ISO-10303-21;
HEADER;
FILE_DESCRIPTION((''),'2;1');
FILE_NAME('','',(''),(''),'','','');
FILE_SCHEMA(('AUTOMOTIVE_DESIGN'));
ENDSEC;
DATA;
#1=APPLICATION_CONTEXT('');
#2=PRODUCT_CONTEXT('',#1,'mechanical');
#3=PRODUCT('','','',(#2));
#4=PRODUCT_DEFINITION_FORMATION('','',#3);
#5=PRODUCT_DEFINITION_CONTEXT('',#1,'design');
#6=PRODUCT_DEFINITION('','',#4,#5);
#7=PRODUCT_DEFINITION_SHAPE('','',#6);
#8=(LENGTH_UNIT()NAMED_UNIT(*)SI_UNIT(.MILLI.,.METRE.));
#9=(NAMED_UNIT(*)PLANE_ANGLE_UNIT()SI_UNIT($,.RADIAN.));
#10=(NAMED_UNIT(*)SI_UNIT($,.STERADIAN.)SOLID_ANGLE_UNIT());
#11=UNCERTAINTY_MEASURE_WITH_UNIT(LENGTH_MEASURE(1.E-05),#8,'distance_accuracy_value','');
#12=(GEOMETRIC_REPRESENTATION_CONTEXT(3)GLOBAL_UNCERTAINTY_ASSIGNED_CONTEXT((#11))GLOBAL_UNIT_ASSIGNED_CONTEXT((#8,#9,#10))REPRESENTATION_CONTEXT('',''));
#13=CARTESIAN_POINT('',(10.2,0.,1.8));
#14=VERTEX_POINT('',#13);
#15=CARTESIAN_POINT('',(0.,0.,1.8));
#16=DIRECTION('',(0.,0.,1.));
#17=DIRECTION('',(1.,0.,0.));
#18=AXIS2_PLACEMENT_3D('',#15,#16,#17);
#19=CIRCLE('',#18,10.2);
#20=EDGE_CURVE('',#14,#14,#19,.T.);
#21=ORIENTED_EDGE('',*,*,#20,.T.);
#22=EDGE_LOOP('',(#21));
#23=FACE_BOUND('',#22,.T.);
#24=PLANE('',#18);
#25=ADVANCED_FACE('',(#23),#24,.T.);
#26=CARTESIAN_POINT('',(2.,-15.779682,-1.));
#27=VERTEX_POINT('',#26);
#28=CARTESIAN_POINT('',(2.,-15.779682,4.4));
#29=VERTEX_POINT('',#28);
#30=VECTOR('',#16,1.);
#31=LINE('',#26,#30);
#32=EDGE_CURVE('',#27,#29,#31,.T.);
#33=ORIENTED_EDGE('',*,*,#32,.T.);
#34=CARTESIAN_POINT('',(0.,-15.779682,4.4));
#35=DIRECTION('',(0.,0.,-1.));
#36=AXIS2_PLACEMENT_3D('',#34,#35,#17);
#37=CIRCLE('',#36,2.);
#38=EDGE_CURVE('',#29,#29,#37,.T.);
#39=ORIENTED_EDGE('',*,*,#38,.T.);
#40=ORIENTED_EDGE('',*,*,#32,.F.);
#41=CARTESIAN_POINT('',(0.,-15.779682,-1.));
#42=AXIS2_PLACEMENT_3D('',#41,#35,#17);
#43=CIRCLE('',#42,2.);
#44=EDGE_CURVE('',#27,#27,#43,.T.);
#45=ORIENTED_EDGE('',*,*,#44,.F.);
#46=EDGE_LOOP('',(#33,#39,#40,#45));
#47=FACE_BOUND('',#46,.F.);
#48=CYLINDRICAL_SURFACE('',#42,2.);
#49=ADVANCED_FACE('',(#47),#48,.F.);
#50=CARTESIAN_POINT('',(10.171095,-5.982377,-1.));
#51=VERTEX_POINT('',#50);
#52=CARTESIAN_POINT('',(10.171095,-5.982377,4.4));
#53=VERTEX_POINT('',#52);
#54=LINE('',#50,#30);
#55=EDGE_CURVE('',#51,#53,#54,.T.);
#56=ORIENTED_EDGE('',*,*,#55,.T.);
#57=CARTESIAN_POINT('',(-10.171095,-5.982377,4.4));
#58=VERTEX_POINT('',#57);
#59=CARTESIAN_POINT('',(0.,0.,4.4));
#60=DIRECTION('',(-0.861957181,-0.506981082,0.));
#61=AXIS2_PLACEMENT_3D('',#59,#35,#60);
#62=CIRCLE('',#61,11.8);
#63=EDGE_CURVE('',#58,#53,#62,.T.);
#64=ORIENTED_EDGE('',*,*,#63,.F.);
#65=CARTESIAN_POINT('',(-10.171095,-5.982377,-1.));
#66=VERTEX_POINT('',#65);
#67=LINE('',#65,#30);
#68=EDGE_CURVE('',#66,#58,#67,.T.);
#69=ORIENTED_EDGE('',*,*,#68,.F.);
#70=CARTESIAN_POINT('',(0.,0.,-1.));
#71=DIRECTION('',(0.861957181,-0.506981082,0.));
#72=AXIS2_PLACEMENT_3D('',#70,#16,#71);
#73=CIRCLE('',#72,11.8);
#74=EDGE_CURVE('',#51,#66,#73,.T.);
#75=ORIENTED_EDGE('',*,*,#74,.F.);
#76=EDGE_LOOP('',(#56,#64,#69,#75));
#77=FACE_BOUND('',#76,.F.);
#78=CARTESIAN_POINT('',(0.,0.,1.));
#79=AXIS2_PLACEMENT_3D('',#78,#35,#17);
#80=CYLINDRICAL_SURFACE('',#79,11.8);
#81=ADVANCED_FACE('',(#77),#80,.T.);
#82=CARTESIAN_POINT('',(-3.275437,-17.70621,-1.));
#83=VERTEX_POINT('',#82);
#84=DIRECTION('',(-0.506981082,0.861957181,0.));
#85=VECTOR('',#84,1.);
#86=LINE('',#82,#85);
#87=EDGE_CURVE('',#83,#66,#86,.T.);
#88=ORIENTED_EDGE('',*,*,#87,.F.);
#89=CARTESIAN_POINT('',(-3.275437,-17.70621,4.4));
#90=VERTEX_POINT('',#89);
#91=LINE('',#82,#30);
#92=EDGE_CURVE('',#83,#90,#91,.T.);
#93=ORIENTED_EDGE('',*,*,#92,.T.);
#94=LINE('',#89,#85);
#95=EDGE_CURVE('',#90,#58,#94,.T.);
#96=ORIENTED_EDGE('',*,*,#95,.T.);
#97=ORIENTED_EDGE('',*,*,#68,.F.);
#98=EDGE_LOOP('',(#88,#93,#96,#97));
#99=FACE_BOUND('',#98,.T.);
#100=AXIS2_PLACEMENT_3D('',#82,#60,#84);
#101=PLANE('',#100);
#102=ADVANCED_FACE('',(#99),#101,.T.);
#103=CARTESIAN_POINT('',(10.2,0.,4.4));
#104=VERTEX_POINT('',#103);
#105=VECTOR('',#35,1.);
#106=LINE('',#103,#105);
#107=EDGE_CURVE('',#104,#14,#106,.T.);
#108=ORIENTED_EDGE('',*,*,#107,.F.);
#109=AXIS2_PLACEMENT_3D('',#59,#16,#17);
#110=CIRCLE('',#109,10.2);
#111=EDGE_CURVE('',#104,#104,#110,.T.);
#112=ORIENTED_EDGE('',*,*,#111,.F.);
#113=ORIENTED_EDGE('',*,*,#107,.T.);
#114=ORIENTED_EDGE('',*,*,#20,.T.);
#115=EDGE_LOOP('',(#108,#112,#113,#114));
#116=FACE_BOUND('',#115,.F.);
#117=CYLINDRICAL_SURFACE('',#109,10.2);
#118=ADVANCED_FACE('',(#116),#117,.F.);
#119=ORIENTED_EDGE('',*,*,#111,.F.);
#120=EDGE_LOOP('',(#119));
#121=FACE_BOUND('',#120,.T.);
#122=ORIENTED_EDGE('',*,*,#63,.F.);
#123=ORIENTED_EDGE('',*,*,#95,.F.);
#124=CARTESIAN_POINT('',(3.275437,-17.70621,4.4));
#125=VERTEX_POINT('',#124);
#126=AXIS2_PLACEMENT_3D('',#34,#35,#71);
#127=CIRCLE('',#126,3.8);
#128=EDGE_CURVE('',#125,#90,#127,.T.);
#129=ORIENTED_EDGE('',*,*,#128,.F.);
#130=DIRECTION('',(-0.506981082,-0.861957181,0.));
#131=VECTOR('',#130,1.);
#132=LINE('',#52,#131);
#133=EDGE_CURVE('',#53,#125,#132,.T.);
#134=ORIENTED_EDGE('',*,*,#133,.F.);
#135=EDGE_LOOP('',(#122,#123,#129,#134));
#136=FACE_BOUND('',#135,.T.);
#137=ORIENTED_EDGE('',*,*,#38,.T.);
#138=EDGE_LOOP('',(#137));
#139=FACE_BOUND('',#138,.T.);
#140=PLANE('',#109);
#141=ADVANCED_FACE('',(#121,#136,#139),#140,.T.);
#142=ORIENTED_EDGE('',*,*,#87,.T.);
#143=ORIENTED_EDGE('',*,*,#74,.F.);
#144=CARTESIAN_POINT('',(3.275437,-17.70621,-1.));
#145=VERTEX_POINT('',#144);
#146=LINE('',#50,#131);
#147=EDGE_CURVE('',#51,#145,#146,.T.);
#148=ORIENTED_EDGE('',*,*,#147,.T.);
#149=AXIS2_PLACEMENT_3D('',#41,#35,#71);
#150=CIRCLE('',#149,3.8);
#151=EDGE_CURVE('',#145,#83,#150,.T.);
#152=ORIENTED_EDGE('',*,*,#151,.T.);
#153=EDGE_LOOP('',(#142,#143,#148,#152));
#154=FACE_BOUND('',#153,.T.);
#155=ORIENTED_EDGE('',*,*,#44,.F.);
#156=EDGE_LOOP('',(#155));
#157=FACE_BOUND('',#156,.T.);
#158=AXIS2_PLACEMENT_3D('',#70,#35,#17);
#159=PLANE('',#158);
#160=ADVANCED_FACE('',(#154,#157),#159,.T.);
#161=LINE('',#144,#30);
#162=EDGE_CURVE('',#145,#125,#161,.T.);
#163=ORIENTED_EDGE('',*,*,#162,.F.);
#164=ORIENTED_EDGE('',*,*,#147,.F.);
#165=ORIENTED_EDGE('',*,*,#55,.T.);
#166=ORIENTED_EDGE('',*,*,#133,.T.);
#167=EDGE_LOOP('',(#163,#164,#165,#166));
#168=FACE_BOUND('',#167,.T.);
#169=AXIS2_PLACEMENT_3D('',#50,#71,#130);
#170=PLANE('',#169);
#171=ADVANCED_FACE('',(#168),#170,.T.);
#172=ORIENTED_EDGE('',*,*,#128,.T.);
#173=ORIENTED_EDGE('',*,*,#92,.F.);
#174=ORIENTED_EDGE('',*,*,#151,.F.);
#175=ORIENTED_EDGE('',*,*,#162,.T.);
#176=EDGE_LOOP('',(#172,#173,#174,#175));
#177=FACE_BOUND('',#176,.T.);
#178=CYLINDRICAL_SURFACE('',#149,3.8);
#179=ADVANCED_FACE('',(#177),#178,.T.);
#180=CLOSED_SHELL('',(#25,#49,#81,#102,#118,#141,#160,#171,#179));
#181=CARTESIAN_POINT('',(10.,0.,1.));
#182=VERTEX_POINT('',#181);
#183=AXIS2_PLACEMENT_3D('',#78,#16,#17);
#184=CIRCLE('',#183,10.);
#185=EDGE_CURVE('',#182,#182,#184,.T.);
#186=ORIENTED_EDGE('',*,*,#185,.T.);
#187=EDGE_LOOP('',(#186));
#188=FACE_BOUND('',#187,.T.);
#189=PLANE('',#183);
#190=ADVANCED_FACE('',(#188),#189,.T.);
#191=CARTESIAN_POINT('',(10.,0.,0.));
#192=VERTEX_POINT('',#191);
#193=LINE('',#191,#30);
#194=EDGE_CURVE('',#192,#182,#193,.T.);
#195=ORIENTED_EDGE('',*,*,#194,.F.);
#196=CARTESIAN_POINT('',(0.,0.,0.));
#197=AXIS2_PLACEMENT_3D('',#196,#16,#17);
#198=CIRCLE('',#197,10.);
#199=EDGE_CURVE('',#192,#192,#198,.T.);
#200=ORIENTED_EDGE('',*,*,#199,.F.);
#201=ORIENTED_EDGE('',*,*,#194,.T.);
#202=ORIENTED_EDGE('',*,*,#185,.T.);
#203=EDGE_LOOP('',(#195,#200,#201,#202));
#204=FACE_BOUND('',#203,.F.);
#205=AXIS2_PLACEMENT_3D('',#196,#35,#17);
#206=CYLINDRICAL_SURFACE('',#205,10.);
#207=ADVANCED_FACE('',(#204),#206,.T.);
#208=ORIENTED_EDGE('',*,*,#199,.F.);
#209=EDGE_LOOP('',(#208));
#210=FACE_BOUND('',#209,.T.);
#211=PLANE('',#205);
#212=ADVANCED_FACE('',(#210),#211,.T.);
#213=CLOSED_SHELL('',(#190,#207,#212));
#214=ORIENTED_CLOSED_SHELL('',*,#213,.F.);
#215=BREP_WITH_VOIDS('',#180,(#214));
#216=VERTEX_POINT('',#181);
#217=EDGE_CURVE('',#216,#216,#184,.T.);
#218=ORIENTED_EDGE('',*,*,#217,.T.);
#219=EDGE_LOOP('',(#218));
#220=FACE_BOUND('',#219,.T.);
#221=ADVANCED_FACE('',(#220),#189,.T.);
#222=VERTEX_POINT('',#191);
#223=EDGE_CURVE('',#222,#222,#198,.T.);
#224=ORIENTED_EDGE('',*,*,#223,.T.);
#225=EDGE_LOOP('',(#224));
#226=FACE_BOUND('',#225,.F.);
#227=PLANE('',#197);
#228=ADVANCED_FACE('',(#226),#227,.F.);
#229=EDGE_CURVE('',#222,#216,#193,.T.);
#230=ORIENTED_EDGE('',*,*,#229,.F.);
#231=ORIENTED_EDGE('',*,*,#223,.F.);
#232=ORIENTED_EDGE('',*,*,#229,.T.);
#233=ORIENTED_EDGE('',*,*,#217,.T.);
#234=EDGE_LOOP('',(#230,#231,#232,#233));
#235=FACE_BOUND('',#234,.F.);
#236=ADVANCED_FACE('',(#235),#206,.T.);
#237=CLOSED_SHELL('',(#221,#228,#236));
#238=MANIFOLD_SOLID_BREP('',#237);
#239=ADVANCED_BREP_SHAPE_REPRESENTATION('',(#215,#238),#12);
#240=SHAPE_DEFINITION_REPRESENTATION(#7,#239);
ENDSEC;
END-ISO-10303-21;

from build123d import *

# Parameters (mm, degrees)
F0_R      = 10
F1_DEPTH  = 1
F2_R      = 11.8
F3_DEPTH  = 1
F4_R      = 11.8
F4_R_2    = 10
F5_DEPTH  = 1
F6_R      = 11.8
F7_DEPTH  = 3.4
F8_R      = 10.2
F9_DEPTH  = 2.6
F10_R     = 2
F11_DEPTH = 5.4


with BuildPart() as f1:
    # F0 (on Top) → F1 (new body)
    with BuildSketch(Plane.XY):
        Circle(F0_R)
    extrude(amount=F1_DEPTH)


with BuildPart() as f3:
    # F2 (on face) → F3 (new body)
    with BuildSketch(Plane(origin=(0, 0, 0), x_dir=(1, 0, 0), z_dir=(0, 0, -1))):
        Circle(F2_R)
    extrude(amount=F3_DEPTH)

    # F4 (on face) → F5 (join)
    with BuildSketch(Plane.XY):
        Circle(F4_R)
        Circle(F4_R_2, mode=Mode.SUBTRACT)
    extrude(amount=F5_DEPTH)

    # F6 (on face) → F7 (join)
    with BuildSketch(Plane.XY.offset(1)):
        Circle(F6_R)
    extrude(amount=F7_DEPTH)

    # F8 (on face) → F9 (cut)
    with BuildSketch(Plane.XY.offset(4.4)):
        Circle(F8_R)
    extrude(amount=-F9_DEPTH, mode=Mode.SUBTRACT)

    # F10 (on face) → F11 (join, through all)
    with BuildSketch(Plane(origin=(0, 0, -1), x_dir=(1, 0, 0), z_dir=(0, 0, -1))):
        with BuildLine():
            ThreePointArc((-3.2754372895, 17.7062096148), (-0.9983331858, 12.113166694), (3.8, 15.7796815038))
            ThreePointArc((3.8, 15.7796815038), (3.6665148097, 16.7780146896), (3.2754372895, 17.7062096148))
            ThreePointArc((3.2754372895, 17.7062096148), (0, 19.5796815038), (-3.2754372895, 17.7062096148))
        make_face()
        with Locations((0, 15.7796815038)):
            Circle(F10_R, mode=Mode.SUBTRACT)
        with BuildLine():
            ThreePointArc((3.2754372895, 17.7062096148), (3.6665148097, 16.7780146896), (3.8, 15.7796815038))
            ThreePointArc((3.8, 15.7796815038), (-0.9983331858, 12.113166694), (-3.2754372895, 17.7062096148))
            Line((-3.2754372895, 17.7062096148), (-10.1710947411, 5.9823767658))
            ThreePointArc((-10.1710947411, 5.9823767658), (0, 11.8), (10.1710947411, 5.9823767658))
            Line((10.1710947411, 5.9823767658), (3.2754372895, 17.7062096148))
        make_face()
    extrude(amount=-F11_DEPTH)


solid = Compound([f1.part, f3.part])
